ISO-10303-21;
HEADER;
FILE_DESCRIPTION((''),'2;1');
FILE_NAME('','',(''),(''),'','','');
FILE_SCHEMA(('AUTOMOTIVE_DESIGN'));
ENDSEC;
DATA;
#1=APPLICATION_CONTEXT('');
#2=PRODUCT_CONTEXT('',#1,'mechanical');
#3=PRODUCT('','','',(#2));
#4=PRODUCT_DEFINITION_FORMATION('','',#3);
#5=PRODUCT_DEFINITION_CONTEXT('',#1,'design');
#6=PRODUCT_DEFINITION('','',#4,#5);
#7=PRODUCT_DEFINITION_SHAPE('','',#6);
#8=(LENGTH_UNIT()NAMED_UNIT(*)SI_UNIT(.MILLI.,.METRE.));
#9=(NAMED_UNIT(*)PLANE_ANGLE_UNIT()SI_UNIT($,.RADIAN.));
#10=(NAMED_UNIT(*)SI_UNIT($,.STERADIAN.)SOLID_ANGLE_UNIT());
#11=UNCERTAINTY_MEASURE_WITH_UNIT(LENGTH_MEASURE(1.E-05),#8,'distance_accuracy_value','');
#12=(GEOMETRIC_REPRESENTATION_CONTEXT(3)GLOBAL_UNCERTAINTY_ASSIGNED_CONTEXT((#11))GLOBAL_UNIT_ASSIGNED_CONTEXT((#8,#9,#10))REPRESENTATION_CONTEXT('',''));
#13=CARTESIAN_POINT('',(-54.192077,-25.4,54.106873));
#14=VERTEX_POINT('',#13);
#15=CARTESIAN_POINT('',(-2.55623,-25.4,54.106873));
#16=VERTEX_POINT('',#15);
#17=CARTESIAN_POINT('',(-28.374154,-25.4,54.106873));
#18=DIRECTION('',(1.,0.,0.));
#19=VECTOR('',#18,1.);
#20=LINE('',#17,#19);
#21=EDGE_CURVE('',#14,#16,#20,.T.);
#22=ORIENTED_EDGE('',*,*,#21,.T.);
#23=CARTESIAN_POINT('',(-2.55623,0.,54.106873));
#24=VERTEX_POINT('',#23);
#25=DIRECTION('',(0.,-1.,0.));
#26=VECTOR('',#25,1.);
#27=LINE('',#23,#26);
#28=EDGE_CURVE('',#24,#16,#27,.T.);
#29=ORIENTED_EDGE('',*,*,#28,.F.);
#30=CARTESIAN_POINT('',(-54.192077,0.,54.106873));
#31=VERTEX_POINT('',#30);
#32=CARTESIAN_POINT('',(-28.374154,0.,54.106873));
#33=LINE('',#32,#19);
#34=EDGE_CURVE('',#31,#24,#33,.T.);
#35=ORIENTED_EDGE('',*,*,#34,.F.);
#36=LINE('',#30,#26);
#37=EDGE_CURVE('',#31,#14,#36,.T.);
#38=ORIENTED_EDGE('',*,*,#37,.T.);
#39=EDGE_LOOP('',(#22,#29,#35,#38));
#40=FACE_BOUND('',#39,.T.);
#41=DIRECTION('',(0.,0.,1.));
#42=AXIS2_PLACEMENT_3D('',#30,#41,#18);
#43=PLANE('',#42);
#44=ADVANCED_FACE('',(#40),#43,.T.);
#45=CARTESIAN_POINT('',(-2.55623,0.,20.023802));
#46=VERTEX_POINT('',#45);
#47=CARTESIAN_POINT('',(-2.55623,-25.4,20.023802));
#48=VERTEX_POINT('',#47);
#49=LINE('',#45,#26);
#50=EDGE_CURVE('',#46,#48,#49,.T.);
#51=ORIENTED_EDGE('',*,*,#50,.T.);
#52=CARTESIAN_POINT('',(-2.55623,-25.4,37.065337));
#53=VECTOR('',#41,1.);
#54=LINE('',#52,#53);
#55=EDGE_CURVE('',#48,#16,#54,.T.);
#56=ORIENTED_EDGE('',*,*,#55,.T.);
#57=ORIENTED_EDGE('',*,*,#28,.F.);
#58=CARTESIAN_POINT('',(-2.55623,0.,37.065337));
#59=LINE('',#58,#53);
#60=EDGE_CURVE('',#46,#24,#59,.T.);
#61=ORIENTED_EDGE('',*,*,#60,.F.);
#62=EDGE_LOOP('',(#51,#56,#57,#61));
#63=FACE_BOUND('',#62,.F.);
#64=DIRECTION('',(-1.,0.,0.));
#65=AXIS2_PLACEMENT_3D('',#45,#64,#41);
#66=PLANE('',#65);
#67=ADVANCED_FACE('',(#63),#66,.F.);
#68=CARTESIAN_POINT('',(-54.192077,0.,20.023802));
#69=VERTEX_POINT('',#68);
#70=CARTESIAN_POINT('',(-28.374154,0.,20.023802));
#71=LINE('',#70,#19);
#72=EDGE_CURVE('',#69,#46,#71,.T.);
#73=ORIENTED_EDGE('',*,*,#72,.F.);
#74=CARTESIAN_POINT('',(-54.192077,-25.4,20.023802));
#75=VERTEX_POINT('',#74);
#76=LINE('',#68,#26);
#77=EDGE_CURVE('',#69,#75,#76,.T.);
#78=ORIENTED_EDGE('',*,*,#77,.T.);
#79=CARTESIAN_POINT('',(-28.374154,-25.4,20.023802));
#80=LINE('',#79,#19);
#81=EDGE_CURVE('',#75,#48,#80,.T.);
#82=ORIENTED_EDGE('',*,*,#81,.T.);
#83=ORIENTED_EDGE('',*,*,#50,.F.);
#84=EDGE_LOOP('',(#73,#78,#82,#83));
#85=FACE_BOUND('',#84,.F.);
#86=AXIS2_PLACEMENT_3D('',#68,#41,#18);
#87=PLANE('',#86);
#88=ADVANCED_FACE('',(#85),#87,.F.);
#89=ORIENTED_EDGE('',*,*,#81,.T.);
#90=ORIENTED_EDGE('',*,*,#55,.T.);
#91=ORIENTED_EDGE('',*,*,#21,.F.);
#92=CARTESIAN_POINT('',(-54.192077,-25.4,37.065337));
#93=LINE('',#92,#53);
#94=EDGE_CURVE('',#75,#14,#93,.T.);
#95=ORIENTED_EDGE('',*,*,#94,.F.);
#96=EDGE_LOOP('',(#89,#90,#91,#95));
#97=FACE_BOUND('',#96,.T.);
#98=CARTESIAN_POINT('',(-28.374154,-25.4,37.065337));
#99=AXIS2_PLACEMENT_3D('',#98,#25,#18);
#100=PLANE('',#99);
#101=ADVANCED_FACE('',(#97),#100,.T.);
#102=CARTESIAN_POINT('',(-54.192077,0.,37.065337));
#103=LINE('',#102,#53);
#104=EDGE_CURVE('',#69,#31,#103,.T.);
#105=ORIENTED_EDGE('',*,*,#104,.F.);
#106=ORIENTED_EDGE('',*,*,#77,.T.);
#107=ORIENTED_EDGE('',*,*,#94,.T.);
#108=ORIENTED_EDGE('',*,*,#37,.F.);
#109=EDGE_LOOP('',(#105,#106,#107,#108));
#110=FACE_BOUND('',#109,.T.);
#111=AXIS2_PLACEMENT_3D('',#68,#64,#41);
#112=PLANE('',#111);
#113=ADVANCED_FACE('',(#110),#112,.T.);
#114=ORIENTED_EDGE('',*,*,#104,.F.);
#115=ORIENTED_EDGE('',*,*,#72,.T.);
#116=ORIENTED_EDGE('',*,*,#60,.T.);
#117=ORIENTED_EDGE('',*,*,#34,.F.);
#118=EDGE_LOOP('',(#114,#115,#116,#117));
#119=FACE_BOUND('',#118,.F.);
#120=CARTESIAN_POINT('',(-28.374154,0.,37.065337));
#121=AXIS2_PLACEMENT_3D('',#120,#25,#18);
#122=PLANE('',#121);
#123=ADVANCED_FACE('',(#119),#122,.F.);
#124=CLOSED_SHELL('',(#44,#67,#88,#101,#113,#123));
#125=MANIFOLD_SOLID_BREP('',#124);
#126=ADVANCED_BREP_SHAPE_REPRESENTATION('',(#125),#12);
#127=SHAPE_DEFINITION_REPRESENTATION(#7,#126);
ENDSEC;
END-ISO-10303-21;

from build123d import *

# Parameters (mm, degrees)
F0_W     = 51.6358476598
F0_H     = 34.0830702335
F1_DEPTH = 25.4


# Not quite as in the source:
# - the program builds the solid bodies; features that only make, move or delete a surface that nothing else refers to are left out


with BuildPart() as f1:
    # F0 (on Front) → F1 (new body)
    with BuildSketch(Plane.XZ):
        with Locations((-28.3741535386, 37.0653374121)):
            Rectangle(F0_W, F0_H)
    extrude(amount=F1_DEPTH)


with BuildPart() as f1b:
    # F0 (on Front) → F1, piece 2 (new body)
    with BuildSketch(Plane.XZ):
        with BuildLine():
            add(Edge.make_bspline(
                [(22.3244093359, -13.7184355408), (20.9649784334, -4.7843207272), (25.9798632943, 15.3706872491), (65.2765981799, 46.8827002107), (65.9557933658, 4.9138085279), (31.1793653474, -36.4502806513), (23.2965008124, -20.1069741898), (22.3244093359, -13.7184355408)],
                knots=[0, 0, 0, 0, 0.2008979891, 0.4184498703, 0.6092802876, 0.8563433989, 1, 1, 1, 1], degree=3))
        make_face()
    extrude(amount=F1_DEPTH)


solid = f1.part
